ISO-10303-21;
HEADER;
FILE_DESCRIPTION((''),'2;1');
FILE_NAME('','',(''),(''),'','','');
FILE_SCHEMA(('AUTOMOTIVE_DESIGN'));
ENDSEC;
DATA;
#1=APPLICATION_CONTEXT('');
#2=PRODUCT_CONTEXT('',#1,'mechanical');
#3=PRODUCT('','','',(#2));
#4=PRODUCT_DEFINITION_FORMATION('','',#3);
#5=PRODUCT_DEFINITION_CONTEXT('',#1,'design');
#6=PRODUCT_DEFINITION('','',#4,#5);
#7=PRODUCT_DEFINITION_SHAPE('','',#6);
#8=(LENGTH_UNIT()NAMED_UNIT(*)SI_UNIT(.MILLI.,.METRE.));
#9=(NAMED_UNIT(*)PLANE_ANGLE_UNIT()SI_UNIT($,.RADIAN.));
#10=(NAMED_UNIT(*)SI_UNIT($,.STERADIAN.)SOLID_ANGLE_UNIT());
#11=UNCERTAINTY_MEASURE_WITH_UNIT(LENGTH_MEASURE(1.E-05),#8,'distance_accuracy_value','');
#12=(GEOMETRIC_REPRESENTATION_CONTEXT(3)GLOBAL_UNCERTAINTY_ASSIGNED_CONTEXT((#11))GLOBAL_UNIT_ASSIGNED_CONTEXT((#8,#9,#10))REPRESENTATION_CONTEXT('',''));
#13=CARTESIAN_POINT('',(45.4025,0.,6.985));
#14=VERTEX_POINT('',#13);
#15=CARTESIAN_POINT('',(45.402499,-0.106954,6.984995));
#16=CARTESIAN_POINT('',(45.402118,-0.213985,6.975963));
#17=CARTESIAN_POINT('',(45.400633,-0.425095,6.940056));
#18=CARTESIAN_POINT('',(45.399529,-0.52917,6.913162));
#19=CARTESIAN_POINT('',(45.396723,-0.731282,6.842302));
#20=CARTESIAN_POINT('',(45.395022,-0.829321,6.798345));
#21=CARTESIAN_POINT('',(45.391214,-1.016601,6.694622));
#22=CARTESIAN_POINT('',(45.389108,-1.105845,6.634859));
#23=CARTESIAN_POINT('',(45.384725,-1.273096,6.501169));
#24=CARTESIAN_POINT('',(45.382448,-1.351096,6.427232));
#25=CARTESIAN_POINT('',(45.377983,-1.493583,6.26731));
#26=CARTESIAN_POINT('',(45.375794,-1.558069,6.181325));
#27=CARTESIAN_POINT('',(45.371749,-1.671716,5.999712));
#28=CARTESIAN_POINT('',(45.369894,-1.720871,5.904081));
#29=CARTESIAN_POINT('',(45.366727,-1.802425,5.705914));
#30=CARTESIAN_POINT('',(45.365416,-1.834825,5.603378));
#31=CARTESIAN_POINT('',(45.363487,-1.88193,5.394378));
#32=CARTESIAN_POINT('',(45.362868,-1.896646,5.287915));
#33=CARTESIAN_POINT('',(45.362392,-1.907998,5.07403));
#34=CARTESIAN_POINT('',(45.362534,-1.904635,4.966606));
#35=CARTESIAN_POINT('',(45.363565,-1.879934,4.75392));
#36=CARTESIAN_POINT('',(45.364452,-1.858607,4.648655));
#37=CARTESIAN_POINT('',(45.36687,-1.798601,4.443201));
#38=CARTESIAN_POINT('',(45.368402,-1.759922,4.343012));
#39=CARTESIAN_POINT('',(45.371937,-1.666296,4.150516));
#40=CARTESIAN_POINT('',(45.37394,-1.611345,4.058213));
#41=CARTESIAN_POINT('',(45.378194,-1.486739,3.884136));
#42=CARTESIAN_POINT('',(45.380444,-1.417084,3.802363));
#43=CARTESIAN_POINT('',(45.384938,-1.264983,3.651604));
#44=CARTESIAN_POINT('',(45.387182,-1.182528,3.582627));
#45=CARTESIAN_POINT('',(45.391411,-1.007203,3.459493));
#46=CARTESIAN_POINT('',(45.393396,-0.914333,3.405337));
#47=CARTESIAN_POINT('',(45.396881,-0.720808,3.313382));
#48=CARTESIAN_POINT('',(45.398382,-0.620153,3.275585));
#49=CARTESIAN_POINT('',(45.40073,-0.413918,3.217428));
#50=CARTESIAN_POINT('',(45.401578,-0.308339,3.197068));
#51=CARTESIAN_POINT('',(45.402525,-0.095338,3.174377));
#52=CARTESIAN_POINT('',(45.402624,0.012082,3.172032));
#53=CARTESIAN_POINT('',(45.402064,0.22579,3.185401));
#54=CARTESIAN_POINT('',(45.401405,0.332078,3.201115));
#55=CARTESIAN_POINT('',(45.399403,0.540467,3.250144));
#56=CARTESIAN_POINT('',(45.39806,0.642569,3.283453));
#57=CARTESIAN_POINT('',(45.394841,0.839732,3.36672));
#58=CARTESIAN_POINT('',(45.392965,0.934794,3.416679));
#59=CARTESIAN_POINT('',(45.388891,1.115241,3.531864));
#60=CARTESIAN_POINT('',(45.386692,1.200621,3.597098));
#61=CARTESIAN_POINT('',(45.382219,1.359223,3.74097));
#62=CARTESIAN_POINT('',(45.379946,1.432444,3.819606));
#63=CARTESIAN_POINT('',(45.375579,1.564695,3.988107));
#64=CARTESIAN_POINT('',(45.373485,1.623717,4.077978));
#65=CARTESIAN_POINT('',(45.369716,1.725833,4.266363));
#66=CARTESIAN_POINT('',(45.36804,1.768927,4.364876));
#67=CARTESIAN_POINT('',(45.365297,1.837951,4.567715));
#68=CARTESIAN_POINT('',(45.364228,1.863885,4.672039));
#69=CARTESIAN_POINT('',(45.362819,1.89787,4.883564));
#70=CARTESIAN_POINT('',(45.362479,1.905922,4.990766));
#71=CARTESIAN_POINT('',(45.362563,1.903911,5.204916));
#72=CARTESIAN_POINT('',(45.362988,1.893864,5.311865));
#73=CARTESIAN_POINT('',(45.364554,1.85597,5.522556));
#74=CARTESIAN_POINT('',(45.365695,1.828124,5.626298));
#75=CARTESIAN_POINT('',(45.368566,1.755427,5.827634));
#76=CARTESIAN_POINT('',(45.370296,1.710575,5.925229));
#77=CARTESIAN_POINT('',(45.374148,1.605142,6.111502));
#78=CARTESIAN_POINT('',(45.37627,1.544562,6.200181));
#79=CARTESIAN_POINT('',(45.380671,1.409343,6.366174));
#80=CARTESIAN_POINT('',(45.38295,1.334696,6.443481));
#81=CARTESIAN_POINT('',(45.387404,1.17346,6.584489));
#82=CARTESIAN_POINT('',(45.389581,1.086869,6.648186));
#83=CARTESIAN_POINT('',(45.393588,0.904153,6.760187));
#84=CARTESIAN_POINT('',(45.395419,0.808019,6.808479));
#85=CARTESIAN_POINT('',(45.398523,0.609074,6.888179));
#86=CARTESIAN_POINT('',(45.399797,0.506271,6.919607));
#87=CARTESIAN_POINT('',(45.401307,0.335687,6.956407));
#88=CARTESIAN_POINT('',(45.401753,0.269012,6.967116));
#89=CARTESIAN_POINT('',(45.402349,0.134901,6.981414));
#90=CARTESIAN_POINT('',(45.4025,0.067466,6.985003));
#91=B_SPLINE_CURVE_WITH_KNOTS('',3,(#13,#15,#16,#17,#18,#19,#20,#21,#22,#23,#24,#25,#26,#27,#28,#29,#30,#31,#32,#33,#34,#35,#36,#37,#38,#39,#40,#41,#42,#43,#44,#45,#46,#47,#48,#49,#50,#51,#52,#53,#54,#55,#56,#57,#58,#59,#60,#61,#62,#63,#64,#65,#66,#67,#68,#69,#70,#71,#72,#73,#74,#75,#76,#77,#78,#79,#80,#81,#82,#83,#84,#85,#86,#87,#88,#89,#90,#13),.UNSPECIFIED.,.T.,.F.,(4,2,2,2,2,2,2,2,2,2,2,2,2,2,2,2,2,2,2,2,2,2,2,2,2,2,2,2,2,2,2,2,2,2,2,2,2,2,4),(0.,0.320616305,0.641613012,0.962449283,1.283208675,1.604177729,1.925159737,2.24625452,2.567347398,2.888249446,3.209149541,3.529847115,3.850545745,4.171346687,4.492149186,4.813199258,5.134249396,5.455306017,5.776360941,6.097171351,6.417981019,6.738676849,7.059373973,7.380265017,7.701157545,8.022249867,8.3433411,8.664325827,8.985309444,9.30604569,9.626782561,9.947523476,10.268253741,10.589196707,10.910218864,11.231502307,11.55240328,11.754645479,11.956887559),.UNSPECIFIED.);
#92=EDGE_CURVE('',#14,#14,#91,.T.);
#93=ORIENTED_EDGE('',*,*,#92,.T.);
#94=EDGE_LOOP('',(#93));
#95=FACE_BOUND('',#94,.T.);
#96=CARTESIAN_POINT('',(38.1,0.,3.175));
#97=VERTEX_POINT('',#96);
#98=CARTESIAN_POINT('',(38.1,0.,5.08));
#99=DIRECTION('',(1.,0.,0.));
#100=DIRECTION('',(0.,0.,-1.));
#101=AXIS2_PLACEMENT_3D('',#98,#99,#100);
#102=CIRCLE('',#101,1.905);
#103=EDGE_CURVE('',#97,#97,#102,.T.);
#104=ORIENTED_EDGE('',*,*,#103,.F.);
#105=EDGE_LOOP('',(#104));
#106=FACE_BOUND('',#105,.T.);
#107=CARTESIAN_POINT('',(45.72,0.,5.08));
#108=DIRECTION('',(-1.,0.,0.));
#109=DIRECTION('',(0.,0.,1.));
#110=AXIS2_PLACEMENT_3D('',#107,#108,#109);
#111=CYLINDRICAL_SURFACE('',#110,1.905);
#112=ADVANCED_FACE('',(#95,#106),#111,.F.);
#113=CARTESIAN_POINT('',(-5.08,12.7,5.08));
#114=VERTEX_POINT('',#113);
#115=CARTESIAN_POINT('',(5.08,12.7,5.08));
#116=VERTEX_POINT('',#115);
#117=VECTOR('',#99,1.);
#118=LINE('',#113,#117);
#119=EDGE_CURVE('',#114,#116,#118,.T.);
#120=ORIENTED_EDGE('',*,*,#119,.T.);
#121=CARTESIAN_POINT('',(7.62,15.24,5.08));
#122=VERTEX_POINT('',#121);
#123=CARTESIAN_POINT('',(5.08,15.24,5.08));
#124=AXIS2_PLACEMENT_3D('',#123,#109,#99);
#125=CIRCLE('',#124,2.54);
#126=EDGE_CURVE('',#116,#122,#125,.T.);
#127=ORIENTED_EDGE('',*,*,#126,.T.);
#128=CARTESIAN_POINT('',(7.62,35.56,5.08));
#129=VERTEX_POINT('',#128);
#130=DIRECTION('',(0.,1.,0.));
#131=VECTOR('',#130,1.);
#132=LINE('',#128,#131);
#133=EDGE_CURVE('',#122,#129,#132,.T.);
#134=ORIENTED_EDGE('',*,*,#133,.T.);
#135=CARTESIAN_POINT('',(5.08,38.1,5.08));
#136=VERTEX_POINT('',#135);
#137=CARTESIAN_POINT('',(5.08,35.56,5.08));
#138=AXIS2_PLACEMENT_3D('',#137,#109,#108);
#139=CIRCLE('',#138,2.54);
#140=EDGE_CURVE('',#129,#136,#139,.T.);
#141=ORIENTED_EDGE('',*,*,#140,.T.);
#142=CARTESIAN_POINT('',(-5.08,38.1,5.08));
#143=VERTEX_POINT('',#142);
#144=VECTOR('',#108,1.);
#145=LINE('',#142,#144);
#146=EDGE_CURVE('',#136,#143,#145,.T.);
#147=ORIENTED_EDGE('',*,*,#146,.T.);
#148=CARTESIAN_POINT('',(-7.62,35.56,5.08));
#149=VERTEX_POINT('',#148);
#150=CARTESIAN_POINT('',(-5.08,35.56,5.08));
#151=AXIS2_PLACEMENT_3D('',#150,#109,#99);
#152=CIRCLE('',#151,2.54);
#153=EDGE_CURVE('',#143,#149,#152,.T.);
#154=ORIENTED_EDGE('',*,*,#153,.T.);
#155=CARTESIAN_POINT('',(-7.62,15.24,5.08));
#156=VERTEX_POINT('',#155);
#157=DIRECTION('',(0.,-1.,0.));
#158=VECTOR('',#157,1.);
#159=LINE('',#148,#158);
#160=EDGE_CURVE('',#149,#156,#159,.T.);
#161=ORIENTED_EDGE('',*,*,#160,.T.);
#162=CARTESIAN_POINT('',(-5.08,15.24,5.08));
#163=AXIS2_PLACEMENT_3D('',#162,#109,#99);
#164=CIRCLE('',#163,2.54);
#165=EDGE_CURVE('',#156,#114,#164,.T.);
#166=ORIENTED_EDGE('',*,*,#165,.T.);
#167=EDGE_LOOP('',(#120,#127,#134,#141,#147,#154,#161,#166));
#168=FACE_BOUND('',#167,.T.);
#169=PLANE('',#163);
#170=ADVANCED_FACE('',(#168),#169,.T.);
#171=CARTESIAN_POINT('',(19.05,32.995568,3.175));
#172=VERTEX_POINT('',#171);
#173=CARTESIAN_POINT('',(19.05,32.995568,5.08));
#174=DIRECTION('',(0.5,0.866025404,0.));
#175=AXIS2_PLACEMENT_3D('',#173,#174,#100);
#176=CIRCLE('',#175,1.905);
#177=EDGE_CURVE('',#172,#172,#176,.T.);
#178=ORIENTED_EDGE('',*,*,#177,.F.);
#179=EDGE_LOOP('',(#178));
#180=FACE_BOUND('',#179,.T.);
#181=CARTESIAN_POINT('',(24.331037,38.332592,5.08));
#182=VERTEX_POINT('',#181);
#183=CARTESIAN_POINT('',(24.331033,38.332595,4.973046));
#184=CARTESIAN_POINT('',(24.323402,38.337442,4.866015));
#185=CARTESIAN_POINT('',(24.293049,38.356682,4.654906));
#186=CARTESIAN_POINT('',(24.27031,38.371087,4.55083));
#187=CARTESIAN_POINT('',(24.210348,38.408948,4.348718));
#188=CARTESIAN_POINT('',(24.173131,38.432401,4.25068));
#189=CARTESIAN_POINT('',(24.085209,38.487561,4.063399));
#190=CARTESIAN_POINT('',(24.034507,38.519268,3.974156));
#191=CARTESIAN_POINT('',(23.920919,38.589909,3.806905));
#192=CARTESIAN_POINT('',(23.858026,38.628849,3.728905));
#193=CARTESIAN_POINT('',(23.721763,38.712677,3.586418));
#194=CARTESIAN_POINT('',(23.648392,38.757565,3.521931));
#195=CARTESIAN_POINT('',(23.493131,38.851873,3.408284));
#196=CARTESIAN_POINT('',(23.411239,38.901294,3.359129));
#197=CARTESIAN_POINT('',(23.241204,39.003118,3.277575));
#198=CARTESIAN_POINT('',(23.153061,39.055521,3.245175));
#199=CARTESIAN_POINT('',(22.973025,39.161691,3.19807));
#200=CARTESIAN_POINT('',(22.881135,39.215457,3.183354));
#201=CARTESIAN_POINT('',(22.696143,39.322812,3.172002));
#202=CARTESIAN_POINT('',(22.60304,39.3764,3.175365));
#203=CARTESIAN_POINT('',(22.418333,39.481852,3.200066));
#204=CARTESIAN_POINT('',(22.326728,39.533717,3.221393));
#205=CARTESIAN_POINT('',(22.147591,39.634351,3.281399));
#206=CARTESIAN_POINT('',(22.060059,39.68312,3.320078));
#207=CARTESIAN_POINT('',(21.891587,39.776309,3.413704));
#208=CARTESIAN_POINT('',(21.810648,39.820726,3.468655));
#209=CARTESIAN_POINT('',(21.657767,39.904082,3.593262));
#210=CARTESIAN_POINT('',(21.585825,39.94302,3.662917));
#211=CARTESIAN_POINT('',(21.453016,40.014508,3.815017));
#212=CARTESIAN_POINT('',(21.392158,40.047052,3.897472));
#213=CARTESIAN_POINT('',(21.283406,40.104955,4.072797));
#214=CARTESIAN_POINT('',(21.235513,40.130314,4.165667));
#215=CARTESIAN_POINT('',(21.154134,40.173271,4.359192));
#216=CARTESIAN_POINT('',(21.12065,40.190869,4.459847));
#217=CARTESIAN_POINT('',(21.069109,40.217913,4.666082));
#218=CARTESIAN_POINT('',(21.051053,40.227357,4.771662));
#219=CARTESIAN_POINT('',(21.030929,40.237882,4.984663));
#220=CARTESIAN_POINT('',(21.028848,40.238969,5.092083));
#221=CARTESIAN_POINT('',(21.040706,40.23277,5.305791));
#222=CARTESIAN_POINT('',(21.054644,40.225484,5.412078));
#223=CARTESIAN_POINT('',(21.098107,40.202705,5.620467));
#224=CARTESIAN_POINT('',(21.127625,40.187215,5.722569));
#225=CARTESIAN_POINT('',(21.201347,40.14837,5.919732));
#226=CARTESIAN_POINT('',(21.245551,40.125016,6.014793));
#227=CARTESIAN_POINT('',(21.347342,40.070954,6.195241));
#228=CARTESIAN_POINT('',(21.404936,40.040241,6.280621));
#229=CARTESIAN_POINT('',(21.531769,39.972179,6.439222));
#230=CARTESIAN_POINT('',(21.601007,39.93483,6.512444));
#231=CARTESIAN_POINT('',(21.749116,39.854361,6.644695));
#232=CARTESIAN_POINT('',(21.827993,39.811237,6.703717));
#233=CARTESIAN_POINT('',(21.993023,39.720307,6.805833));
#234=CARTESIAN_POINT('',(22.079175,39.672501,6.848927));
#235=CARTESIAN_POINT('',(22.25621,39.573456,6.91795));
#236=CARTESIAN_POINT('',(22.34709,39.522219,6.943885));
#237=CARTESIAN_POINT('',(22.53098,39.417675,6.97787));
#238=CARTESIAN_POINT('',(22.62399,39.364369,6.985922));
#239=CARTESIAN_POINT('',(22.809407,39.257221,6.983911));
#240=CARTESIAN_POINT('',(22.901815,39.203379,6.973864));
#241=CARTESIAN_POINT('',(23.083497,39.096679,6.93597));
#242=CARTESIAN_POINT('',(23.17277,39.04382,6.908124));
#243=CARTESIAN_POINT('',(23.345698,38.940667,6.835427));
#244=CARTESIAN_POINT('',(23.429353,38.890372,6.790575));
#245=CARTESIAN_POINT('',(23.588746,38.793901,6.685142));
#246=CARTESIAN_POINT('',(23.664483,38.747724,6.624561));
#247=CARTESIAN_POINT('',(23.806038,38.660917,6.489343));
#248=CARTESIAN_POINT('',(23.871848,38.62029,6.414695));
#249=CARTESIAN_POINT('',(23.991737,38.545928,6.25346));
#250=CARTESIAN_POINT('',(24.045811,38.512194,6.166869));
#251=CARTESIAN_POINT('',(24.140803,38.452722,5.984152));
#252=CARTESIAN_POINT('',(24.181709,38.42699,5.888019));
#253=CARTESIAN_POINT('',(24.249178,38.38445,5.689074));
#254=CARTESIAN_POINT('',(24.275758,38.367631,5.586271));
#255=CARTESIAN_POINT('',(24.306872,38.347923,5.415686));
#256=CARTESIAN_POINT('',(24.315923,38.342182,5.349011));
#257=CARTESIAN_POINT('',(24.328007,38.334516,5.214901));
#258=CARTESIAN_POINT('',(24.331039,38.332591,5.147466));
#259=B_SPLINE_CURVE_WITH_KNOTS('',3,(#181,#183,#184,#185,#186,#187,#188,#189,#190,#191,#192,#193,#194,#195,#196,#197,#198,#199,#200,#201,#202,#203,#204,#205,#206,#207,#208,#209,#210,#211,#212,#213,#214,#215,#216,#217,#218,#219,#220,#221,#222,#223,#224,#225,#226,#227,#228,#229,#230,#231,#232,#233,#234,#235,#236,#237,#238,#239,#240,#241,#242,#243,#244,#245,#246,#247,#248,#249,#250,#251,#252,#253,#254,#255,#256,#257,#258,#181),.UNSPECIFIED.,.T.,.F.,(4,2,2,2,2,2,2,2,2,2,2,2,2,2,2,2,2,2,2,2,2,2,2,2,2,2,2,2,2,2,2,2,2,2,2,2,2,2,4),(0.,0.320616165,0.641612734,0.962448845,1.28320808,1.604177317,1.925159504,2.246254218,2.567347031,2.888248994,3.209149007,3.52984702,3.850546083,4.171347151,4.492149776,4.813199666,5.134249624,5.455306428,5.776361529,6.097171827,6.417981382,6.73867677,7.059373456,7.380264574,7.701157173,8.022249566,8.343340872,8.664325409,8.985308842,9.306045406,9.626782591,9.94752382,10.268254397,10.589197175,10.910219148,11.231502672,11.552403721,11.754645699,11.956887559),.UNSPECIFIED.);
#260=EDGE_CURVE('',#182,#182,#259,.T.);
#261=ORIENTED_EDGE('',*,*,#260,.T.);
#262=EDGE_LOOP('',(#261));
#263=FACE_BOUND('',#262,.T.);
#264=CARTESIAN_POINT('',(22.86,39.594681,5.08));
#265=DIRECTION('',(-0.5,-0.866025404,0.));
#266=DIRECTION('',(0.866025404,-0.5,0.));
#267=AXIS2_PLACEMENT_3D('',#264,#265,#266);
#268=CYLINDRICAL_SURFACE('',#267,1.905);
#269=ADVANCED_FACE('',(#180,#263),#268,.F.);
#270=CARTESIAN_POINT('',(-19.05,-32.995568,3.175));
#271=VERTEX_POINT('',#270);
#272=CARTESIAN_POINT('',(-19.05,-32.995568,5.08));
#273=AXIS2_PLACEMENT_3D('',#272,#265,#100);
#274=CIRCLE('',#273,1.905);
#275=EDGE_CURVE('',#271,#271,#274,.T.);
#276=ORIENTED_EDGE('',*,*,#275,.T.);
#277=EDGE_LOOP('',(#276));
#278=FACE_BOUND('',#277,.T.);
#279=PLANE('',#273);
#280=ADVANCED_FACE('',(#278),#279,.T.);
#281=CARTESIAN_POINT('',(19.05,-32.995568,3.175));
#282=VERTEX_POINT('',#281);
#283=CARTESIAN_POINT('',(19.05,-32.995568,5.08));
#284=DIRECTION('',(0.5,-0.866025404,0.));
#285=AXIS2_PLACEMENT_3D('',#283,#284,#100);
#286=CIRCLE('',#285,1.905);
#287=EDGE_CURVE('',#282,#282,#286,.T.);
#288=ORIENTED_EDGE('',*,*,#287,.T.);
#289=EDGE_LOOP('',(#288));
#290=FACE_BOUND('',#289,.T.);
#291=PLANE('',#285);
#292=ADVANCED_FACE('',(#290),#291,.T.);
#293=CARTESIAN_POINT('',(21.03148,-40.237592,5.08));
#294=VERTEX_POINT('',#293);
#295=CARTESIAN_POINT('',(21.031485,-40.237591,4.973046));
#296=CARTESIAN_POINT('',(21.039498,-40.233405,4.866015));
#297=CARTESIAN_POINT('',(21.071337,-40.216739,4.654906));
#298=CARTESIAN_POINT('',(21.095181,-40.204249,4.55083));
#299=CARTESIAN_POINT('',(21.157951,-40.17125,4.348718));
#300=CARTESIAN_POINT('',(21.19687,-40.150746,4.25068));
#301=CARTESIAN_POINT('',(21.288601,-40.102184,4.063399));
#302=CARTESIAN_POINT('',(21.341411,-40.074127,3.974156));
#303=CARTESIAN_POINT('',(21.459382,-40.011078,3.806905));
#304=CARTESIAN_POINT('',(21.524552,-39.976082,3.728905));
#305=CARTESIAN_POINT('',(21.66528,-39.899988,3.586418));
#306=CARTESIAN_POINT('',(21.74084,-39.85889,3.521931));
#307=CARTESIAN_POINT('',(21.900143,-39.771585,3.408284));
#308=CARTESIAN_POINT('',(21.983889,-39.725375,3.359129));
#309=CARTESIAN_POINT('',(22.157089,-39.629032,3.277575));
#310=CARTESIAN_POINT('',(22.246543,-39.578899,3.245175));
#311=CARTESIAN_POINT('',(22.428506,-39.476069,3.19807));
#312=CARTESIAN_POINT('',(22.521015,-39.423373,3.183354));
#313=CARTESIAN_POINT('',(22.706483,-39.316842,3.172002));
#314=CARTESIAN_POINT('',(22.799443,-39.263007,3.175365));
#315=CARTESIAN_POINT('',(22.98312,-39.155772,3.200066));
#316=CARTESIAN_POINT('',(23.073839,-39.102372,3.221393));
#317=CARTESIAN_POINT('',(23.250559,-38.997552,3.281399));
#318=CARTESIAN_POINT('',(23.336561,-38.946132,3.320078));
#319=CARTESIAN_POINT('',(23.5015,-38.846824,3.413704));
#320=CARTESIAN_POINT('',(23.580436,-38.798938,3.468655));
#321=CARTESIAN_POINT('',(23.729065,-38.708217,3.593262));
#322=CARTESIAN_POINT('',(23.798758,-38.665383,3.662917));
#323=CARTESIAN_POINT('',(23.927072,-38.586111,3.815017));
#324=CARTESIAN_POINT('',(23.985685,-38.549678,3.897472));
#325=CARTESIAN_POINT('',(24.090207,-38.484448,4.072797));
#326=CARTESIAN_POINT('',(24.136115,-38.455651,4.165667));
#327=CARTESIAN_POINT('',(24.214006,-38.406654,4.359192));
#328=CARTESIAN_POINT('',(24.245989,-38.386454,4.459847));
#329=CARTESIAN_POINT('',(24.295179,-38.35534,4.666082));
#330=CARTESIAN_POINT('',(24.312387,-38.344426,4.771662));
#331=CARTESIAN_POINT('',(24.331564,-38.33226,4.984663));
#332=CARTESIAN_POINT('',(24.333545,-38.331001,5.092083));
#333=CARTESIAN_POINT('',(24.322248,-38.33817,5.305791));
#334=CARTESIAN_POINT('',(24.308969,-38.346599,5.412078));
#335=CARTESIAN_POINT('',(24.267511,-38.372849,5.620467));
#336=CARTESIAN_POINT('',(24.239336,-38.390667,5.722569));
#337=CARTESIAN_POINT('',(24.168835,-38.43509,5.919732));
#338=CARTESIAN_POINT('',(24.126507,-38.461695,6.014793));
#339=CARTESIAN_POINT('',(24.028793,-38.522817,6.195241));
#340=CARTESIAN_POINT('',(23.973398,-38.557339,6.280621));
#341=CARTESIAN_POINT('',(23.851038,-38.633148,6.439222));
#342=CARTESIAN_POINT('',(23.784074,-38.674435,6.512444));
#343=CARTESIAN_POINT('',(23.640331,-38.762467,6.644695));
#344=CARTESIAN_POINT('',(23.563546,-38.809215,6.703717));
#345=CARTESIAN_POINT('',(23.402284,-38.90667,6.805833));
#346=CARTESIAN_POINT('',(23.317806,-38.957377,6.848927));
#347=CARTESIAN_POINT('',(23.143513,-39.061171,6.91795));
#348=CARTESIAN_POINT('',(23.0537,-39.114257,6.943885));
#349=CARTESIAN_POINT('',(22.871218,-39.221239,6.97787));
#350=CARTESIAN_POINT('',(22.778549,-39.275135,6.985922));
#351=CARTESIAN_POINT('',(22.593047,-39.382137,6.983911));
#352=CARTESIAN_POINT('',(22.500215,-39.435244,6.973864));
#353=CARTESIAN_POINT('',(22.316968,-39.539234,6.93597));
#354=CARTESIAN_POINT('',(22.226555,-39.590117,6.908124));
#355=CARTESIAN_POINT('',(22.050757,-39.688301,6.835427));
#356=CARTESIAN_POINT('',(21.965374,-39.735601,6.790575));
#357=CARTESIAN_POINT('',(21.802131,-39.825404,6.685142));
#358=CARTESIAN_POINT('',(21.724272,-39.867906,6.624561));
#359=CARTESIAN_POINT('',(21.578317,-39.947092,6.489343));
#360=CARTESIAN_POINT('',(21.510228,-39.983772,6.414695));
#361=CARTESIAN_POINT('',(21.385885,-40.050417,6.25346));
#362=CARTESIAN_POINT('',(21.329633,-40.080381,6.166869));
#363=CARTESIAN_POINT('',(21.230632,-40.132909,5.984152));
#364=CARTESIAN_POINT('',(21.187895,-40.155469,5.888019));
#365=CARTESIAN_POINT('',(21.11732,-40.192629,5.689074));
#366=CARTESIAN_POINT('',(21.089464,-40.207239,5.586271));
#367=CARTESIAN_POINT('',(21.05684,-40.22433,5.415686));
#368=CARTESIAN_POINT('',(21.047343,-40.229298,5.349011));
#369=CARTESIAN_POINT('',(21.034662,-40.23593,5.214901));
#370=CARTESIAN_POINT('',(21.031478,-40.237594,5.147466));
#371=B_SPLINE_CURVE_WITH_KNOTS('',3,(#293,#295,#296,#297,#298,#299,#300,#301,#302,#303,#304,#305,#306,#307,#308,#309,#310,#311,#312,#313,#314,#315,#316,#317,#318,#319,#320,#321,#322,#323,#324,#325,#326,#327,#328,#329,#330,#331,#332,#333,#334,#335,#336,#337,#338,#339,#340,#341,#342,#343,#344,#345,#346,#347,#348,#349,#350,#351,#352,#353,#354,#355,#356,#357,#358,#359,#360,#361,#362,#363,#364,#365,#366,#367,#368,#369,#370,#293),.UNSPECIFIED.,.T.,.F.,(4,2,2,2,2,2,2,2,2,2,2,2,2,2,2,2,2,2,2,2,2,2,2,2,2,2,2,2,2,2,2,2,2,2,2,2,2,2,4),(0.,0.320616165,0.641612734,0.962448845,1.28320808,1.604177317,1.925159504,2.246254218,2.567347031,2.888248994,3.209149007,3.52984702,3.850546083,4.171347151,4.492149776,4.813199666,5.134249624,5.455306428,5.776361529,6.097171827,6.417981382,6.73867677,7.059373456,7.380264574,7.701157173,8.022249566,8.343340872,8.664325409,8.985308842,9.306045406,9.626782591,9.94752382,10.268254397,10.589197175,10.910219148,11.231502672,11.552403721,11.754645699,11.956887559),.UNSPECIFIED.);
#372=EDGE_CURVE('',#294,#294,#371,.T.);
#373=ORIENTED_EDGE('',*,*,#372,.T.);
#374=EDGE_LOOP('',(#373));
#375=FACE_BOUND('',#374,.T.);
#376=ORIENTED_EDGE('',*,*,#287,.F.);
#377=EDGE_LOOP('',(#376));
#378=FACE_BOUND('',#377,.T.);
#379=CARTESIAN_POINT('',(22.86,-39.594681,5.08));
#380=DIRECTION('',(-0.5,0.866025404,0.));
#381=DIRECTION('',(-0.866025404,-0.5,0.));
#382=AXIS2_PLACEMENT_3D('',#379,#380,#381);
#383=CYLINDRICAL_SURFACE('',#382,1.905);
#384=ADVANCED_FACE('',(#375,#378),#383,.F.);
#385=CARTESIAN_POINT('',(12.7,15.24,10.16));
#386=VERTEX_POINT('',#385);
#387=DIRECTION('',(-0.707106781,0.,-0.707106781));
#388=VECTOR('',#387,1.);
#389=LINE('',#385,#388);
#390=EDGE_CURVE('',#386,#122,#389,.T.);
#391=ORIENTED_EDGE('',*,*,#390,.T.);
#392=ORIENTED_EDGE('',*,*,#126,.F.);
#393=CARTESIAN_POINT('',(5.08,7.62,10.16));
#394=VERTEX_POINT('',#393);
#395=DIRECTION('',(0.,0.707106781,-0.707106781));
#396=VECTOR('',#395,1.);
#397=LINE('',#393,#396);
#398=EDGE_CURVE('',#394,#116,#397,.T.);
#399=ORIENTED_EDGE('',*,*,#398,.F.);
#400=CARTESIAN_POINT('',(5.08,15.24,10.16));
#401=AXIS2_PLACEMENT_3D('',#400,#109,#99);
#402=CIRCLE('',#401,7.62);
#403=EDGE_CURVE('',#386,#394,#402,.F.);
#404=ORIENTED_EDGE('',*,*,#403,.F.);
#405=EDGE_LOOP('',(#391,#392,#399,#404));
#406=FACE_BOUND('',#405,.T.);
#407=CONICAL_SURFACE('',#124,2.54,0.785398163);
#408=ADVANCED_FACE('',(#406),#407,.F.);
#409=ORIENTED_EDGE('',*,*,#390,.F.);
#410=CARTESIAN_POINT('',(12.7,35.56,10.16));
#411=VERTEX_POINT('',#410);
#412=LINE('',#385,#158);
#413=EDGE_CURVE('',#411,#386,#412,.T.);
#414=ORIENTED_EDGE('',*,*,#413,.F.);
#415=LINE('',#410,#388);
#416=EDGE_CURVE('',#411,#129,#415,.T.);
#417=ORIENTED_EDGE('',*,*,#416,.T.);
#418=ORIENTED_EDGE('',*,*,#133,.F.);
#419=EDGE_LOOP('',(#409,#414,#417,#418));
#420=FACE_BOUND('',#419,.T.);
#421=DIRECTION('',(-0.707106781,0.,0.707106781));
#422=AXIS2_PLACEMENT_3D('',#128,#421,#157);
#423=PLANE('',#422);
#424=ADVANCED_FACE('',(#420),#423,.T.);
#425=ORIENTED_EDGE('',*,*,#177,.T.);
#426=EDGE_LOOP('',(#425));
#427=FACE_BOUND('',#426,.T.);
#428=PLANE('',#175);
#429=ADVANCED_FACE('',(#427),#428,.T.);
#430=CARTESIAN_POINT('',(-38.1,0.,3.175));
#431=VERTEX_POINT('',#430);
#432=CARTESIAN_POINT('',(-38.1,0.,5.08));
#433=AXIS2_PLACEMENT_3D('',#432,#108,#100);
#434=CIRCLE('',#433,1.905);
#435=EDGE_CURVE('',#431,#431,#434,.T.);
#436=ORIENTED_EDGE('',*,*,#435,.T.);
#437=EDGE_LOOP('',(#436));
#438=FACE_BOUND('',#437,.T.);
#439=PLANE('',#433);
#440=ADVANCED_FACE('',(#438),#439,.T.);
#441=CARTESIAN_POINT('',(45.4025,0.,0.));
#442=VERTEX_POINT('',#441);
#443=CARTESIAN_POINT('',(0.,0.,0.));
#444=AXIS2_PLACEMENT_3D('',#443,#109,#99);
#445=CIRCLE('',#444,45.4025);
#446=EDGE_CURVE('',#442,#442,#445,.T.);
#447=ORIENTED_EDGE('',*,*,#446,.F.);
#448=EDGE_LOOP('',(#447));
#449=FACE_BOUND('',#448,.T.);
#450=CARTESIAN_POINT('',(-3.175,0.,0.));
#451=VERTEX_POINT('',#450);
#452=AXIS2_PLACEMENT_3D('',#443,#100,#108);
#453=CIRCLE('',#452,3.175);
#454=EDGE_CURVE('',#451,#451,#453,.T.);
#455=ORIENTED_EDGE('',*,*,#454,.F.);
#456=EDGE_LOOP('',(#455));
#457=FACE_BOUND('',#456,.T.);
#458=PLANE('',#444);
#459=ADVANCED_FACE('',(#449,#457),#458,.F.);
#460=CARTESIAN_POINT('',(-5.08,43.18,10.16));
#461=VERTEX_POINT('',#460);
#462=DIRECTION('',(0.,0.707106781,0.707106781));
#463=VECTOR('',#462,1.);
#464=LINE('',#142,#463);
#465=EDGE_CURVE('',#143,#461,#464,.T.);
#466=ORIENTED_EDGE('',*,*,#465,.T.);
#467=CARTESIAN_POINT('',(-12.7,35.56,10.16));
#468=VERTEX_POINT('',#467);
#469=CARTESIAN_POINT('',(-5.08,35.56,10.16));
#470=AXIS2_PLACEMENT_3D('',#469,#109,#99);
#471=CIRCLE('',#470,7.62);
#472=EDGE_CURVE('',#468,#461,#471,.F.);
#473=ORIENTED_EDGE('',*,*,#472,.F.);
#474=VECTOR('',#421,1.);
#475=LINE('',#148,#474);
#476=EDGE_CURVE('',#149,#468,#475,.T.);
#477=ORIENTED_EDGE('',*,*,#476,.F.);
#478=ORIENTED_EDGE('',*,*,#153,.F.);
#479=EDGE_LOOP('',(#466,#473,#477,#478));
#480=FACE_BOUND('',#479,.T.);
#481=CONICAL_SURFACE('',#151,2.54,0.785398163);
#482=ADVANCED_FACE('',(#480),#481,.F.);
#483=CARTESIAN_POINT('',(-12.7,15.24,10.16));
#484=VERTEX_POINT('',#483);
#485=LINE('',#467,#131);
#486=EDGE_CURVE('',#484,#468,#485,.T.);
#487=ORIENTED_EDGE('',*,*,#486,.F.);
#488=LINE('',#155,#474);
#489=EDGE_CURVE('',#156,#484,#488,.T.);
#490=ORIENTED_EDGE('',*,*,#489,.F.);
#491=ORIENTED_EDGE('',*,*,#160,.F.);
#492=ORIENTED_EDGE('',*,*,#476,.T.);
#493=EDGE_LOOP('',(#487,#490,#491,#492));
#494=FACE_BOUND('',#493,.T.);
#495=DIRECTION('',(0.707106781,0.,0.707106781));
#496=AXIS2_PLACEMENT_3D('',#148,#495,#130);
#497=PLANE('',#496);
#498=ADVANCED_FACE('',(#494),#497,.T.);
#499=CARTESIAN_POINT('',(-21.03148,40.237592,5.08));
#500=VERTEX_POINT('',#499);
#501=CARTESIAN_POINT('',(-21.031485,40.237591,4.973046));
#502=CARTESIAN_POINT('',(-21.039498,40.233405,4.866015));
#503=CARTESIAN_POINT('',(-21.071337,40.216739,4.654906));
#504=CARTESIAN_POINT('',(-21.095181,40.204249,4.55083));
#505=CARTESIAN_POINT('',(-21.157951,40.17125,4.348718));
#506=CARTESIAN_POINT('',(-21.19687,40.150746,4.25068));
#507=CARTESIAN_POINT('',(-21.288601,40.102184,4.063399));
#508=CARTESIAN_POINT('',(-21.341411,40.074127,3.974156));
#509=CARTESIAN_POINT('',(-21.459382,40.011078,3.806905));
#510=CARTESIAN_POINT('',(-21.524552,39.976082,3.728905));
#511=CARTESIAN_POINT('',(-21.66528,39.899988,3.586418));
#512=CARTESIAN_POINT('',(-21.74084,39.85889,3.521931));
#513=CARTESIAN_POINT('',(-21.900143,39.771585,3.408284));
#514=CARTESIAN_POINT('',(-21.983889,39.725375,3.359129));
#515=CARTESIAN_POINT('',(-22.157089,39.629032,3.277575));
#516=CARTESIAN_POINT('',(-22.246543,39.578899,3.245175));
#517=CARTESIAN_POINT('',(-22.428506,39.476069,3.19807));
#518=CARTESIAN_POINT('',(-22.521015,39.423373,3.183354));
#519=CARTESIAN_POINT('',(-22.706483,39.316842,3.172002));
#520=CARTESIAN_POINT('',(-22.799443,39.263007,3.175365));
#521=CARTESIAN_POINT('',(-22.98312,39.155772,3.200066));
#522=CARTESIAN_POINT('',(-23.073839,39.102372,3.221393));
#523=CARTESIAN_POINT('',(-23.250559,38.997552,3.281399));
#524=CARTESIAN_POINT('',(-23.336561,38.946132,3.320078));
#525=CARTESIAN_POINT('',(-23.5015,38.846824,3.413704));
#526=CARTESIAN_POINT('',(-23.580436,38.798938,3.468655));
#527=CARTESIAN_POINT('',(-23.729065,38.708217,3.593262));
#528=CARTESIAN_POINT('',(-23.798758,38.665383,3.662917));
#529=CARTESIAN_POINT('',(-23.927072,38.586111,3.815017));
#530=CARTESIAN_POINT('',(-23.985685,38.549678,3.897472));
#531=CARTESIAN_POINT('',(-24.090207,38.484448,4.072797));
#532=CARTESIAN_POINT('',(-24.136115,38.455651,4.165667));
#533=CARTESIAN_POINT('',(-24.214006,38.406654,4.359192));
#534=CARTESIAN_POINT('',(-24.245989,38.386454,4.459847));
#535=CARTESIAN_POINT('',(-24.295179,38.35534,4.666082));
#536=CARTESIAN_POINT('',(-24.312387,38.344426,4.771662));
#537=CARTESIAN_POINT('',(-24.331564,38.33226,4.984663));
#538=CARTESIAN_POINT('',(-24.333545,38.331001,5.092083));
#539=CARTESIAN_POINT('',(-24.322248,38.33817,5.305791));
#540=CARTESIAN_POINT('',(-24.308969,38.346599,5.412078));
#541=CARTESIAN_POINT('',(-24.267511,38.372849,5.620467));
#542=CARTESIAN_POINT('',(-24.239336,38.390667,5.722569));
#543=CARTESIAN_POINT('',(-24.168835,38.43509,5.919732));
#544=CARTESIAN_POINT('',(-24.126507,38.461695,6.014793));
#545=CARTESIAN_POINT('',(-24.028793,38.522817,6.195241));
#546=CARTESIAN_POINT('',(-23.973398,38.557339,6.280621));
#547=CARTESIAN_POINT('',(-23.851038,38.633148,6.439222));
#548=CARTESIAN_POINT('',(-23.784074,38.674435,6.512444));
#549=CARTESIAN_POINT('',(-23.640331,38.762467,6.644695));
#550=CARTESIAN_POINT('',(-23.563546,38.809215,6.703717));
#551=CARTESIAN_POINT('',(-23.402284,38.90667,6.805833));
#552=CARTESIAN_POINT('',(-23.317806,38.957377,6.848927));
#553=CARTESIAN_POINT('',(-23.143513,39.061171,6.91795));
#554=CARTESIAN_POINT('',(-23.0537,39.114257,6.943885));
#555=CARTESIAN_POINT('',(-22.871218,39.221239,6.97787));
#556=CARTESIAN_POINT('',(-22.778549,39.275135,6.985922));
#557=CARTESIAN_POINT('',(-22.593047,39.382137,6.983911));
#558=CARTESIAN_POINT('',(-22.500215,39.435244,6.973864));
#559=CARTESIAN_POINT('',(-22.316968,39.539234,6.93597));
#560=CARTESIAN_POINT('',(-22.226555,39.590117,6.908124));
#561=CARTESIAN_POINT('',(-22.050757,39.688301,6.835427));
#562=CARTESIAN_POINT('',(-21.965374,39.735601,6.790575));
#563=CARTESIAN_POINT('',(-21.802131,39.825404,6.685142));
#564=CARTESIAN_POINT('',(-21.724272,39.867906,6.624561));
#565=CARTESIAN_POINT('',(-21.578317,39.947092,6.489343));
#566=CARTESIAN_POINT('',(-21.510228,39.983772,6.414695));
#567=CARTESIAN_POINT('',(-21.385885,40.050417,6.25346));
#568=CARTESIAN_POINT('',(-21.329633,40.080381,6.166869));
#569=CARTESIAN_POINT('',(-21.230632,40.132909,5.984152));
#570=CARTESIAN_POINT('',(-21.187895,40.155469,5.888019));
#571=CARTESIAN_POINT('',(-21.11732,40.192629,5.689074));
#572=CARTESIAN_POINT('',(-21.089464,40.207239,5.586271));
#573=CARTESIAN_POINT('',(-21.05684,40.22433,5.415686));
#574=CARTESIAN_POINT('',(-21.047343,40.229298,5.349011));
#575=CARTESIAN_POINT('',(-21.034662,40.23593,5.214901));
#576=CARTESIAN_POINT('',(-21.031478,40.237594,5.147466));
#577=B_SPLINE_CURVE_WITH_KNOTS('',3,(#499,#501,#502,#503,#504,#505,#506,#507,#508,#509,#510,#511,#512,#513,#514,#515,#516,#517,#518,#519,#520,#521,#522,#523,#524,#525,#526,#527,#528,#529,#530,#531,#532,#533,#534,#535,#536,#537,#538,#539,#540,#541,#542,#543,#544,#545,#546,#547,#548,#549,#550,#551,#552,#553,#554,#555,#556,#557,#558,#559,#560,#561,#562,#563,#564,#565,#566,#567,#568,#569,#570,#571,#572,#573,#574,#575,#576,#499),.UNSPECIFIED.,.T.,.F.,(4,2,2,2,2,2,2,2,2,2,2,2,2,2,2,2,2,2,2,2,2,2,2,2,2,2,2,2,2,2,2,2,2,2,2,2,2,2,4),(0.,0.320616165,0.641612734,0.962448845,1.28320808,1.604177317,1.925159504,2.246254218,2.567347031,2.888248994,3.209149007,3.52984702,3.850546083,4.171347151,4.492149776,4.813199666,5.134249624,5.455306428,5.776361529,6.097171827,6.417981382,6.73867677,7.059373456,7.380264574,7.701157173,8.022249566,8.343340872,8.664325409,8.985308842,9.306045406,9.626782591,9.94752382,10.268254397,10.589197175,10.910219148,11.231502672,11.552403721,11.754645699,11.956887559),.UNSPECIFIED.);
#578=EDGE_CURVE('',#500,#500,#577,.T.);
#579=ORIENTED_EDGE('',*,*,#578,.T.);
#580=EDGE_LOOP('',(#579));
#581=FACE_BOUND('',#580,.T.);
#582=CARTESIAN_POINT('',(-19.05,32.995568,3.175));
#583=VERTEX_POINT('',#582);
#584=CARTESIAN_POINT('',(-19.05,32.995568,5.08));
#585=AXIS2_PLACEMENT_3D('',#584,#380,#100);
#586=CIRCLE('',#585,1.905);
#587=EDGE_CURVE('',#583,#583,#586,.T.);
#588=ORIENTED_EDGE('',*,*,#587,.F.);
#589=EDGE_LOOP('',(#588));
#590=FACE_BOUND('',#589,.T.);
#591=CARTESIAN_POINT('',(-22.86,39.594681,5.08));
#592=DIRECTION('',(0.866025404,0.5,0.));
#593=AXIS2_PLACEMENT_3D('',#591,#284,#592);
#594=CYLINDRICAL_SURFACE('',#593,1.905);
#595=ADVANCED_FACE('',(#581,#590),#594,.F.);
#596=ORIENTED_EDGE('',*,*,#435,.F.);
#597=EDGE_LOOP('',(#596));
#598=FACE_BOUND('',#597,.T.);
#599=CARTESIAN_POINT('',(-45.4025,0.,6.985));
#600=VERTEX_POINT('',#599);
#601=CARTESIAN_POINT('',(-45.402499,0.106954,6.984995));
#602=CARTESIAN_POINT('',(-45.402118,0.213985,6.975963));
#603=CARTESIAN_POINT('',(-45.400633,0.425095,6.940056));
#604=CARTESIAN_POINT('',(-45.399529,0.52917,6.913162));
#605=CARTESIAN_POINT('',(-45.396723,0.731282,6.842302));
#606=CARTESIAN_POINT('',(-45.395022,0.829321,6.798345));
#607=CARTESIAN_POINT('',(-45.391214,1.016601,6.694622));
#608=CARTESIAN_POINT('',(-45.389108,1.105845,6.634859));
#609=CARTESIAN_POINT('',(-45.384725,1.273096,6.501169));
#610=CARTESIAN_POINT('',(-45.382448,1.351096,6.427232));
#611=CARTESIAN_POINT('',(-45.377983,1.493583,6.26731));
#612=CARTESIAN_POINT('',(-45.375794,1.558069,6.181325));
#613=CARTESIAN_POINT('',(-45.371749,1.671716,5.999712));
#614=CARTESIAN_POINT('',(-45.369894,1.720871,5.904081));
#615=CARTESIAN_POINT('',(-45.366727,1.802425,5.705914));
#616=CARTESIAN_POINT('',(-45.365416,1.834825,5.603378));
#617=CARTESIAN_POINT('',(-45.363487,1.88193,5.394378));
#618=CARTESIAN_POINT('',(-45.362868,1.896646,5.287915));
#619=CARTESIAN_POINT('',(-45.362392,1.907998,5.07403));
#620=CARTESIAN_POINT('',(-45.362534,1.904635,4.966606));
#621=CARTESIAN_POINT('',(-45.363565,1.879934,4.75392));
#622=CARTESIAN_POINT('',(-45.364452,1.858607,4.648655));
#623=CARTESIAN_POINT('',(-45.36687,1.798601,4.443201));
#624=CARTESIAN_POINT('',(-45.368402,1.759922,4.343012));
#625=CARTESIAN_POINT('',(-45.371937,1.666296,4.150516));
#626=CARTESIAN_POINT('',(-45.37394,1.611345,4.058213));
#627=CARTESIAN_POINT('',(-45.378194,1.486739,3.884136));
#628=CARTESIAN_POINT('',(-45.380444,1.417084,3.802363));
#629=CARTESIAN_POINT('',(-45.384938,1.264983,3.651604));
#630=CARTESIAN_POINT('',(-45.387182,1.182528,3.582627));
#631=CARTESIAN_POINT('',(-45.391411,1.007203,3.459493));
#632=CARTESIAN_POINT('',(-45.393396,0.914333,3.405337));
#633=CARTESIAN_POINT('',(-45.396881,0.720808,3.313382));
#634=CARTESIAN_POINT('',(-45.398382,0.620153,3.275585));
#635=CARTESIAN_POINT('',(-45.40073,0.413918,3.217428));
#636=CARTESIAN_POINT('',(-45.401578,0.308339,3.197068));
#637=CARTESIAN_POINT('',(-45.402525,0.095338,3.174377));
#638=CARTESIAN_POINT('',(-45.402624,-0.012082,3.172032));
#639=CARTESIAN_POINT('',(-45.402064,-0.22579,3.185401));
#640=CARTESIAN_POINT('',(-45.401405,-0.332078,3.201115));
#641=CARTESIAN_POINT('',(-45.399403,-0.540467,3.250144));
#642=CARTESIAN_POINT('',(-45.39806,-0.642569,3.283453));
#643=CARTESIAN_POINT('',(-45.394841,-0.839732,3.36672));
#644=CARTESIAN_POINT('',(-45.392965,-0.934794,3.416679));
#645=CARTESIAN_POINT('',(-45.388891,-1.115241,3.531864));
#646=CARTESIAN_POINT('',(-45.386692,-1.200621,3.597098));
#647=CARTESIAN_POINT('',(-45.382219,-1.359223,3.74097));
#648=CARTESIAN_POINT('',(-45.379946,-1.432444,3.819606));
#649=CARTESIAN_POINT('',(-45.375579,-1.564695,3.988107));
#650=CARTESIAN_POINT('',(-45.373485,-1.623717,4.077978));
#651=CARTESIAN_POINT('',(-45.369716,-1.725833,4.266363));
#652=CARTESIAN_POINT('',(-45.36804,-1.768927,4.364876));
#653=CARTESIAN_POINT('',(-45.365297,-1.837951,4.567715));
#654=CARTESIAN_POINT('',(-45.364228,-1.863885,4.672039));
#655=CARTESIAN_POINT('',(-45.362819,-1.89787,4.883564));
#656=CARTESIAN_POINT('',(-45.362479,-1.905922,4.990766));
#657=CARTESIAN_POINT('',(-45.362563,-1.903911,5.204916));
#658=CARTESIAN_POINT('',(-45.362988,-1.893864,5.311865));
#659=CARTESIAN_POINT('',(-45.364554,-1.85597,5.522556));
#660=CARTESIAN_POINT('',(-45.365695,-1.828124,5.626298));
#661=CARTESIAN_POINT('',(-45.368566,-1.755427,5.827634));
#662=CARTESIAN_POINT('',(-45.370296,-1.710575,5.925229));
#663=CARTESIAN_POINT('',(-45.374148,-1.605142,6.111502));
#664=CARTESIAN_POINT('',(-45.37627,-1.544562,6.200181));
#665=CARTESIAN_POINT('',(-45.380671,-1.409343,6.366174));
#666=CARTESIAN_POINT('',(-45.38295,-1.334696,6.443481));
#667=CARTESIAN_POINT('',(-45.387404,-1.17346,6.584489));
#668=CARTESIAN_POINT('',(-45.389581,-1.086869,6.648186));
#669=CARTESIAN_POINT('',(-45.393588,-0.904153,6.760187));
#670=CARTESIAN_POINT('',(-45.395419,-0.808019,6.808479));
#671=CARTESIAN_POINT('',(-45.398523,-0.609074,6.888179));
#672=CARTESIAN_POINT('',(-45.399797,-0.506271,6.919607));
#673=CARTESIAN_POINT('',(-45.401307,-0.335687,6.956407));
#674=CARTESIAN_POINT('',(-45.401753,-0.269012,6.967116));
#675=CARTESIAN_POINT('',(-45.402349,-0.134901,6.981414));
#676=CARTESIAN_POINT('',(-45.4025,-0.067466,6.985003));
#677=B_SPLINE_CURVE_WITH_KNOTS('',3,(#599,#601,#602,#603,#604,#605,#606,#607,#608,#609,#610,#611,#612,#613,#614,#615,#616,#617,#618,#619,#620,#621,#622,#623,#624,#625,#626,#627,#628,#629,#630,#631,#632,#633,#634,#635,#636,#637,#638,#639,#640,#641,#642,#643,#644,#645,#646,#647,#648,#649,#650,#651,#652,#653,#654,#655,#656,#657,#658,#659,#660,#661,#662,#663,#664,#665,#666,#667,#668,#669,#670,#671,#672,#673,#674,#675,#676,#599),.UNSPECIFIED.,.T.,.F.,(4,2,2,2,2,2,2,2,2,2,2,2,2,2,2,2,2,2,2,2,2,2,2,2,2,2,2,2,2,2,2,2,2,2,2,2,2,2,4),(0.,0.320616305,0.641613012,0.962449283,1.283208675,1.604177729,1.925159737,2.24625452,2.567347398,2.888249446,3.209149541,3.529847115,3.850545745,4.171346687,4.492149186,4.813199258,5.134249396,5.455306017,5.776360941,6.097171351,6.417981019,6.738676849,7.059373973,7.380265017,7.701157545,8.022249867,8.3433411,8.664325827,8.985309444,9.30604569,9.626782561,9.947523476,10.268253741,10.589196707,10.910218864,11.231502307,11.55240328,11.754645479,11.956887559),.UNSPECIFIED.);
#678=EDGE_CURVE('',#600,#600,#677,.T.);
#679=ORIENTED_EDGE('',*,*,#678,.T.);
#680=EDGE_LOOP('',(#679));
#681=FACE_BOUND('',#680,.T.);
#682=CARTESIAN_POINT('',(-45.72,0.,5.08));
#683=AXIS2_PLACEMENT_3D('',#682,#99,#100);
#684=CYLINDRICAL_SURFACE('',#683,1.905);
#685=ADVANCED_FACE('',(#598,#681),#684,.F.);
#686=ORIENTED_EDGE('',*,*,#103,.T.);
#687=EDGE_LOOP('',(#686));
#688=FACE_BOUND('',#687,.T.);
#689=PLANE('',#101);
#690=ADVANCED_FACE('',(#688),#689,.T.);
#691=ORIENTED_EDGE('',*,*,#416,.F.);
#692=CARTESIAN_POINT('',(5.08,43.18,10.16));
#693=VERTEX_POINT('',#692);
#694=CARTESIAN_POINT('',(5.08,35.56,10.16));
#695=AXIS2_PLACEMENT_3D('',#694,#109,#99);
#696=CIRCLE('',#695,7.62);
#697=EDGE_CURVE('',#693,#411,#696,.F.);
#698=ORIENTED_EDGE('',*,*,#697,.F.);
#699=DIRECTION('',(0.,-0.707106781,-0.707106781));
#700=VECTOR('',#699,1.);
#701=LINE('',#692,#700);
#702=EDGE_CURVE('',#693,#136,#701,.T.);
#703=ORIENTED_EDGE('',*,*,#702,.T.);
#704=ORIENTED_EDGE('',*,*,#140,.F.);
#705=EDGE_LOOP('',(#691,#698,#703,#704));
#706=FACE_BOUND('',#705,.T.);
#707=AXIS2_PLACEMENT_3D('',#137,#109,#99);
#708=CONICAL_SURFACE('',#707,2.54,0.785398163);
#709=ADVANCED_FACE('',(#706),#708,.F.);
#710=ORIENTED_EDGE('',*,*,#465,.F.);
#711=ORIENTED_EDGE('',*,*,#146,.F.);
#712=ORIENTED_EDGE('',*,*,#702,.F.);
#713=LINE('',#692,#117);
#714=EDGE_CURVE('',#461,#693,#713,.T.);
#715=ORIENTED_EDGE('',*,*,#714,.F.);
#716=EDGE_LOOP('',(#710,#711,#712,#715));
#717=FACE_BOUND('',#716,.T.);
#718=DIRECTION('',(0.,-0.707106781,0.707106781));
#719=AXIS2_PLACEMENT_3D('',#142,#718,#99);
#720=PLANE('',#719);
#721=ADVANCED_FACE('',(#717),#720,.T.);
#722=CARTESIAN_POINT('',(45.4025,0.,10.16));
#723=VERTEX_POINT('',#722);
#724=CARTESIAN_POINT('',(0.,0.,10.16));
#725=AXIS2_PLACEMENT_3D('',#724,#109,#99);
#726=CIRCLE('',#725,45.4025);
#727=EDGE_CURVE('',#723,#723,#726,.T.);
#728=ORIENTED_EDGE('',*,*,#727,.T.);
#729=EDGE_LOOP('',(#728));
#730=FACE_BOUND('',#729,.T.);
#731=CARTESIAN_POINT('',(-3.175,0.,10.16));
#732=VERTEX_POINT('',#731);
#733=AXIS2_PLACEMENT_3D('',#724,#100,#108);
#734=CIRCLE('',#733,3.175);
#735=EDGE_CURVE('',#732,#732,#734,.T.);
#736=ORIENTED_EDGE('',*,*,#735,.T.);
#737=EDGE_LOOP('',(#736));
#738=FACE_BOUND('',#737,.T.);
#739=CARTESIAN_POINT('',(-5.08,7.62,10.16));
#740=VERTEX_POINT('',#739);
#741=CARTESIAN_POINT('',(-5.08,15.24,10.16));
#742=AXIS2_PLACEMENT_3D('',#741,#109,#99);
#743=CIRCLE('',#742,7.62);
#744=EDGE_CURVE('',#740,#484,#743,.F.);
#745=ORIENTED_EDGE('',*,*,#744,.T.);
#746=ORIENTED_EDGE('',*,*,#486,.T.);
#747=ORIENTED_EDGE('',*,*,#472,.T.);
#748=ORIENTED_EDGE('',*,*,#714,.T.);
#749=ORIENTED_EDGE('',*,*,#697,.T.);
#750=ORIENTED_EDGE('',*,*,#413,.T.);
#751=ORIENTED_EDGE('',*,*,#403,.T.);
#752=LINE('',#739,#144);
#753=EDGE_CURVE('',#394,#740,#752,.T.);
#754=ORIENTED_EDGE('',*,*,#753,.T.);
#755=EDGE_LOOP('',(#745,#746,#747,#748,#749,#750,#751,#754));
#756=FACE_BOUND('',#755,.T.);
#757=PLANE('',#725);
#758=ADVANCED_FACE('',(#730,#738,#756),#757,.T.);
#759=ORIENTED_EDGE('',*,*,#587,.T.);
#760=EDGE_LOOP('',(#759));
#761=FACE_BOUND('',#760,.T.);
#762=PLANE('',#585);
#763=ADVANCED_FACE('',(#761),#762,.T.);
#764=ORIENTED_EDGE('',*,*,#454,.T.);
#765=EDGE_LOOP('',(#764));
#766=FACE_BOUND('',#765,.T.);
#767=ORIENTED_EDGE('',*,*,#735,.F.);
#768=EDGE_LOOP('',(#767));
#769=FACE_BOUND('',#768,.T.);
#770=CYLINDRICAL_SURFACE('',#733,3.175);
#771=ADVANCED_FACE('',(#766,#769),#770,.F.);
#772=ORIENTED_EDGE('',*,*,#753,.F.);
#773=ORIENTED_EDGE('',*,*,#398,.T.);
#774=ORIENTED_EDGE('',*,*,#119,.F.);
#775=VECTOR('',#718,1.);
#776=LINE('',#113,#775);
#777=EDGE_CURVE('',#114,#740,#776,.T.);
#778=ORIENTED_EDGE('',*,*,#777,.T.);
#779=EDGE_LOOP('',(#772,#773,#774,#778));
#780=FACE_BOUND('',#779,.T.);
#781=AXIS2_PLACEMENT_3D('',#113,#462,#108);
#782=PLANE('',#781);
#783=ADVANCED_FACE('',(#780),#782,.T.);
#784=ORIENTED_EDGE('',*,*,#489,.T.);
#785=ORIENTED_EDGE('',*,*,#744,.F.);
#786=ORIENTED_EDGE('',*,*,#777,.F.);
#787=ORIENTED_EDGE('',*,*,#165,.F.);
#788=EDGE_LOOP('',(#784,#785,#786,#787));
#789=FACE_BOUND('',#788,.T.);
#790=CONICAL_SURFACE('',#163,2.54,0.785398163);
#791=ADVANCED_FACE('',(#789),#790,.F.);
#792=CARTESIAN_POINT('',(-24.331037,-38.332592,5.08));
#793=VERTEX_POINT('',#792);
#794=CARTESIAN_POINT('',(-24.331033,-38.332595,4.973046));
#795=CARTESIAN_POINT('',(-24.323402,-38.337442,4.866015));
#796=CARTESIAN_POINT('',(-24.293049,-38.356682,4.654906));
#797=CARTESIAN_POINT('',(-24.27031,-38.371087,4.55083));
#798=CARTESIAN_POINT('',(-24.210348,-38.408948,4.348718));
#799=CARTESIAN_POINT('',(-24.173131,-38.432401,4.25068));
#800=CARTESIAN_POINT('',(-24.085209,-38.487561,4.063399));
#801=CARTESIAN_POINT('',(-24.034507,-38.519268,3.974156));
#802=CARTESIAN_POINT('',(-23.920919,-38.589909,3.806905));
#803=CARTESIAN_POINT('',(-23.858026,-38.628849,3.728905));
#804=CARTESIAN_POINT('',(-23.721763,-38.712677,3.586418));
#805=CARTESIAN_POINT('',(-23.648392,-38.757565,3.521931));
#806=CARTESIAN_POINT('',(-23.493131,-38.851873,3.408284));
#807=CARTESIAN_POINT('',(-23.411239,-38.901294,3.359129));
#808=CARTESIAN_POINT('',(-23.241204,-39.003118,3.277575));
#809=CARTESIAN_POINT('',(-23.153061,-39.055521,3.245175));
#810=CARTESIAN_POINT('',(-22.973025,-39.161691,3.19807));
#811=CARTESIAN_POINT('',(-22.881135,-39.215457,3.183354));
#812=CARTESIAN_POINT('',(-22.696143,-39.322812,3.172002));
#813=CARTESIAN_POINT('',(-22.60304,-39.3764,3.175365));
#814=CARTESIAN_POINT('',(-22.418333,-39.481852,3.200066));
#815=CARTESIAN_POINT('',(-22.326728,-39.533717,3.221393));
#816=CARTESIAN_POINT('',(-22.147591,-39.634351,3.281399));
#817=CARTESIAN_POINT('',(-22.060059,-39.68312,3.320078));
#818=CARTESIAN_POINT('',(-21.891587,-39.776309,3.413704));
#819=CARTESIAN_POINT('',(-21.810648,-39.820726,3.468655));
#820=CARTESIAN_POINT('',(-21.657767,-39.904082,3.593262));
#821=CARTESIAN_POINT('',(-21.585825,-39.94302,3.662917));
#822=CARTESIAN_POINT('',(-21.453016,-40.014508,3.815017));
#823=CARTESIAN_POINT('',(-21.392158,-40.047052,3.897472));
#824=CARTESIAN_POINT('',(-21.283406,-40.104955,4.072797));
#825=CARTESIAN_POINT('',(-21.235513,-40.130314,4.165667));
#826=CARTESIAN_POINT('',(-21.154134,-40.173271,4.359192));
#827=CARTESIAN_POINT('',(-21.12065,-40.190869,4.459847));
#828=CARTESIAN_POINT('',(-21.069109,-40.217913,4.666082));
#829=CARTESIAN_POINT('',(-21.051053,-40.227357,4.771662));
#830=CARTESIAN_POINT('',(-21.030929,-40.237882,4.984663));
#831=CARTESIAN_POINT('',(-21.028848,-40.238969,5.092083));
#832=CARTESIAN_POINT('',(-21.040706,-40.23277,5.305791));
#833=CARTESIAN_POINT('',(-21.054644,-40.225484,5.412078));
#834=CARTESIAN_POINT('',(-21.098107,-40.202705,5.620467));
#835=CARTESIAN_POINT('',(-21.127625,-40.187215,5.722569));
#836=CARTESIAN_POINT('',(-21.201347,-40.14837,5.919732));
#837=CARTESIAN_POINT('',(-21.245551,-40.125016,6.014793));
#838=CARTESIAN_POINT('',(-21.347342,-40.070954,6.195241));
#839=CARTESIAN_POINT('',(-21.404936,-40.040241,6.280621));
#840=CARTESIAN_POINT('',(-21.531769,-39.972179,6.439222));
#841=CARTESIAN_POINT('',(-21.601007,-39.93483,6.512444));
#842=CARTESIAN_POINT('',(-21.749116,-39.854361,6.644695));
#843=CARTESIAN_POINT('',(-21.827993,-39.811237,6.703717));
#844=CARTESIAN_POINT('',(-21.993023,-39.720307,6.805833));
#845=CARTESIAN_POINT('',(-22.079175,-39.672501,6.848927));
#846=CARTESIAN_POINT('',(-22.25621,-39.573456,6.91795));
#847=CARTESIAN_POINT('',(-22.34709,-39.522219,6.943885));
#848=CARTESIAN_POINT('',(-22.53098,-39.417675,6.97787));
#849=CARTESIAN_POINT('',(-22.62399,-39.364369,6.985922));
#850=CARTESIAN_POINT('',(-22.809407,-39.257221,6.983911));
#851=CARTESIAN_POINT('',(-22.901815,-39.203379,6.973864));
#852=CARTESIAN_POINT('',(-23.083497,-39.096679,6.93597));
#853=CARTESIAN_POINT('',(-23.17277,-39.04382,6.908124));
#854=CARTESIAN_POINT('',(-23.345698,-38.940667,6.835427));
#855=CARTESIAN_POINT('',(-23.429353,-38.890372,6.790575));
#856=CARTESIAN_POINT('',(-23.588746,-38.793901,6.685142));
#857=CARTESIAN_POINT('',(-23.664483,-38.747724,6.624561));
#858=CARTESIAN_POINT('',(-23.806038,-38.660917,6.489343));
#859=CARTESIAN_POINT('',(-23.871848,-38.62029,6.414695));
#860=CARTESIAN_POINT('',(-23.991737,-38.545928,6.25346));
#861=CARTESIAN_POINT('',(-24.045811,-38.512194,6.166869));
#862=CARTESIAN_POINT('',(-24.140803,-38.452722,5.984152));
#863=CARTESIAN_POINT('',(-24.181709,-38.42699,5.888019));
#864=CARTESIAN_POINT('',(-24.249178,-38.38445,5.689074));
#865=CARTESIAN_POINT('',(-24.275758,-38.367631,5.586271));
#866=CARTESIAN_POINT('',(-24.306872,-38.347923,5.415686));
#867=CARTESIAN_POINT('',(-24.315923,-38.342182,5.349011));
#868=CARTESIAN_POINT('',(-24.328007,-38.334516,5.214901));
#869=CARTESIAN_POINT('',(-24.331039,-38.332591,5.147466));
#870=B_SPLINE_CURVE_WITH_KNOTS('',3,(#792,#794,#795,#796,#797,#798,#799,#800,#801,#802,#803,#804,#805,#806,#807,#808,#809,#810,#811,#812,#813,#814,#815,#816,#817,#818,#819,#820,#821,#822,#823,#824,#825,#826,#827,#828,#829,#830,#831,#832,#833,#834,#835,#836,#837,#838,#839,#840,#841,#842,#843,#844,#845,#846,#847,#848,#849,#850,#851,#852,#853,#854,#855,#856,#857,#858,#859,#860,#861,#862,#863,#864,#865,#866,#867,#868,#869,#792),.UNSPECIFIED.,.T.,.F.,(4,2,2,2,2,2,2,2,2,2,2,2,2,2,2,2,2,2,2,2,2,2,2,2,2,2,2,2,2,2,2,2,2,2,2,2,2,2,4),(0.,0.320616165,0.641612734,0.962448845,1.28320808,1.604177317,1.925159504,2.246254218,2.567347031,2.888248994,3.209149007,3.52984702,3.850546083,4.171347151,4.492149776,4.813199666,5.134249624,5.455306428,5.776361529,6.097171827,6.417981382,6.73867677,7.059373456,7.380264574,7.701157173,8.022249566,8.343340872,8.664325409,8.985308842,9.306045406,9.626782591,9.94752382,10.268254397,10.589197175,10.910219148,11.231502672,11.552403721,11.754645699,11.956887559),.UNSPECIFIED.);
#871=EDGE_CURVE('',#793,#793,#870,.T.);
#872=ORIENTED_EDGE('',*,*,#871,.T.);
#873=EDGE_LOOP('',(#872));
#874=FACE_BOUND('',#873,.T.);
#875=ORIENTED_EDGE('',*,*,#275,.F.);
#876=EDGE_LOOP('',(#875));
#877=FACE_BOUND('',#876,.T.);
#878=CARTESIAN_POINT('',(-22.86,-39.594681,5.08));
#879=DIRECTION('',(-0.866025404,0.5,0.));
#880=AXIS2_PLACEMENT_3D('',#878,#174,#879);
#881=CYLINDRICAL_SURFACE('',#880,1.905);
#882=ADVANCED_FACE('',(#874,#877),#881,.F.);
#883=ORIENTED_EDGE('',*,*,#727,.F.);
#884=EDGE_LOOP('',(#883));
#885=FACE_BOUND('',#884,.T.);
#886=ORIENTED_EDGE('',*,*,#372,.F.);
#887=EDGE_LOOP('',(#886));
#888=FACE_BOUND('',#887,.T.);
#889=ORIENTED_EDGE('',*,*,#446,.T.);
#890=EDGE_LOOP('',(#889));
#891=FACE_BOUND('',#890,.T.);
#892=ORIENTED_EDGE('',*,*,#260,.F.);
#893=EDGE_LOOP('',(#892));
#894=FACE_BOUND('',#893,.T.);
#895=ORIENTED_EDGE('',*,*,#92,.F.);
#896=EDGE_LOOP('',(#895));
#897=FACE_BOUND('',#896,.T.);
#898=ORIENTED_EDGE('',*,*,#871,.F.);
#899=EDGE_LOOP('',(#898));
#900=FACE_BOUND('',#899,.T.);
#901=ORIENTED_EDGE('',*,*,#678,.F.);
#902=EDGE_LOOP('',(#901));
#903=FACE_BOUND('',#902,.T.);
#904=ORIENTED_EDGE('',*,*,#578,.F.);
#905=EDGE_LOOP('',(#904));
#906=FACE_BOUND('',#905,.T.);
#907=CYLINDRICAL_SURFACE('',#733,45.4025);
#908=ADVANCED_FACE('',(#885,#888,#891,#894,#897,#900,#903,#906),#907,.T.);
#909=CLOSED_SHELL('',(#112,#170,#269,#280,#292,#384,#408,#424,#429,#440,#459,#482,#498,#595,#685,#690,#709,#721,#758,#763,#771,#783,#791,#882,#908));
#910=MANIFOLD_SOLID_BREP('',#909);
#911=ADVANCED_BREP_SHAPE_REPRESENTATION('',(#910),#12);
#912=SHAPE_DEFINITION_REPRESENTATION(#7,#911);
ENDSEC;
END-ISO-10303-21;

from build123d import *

# Parameters (mm, degrees)
SKETCH1_R           = 45.4025
BOSS_EXTRUDE1_DEPTH = 10.16
CUT_EXTRUDE1_START  = 38.1
SKETCH2_R           = 1.905
CUT_EXTRUDE1_DEPTH  = 7.62
CIRPATTERN1_COUNT   = 6
SKETCH3_R           = 3.175
CUT_EXTRUDE2_DEPTH  = 66.007689034
CUT_EXTRUDE3_DEPTH  = 5.08
CHAMFER2_SIZE       = 5.08


with BuildPart() as part:
    # Sketch1 → Boss-Extrude1 (new body)
    with BuildSketch(Plane.XY):
        Circle(SKETCH1_R)
    extrude(amount=BOSS_EXTRUDE1_DEPTH)

    # Sketch2 → Cut-Extrude1 (cut)
    with BuildSketch(Plane(origin=(0, 0, 0), x_dir=(0, 0, -1), z_dir=(1, 0, 0)).offset(CUT_EXTRUDE1_START)):
        with Locations((-5.08, 0)):
            Circle(SKETCH2_R)
    cut_extrude1 = extrude(amount=CUT_EXTRUDE1_DEPTH, mode=Mode.SUBTRACT)

    # CirPattern1: Cut-Extrude1 ×6 about axis
    cirpattern1_axis = Axis((0, 0, 0), (0, 0, 1))
    for i in range(1, CIRPATTERN1_COUNT):
        add(cut_extrude1.rotate(cirpattern1_axis, i * 360 / CIRPATTERN1_COUNT), mode=Mode.SUBTRACT)

    # Sketch3 → Cut-Extrude2 (cut, through all)
    with BuildSketch(Plane(origin=(0, 0, 0), x_dir=(-1, 0, 0), z_dir=(0, 0, -1))):
        Circle(SKETCH3_R)
    extrude(amount=-CUT_EXTRUDE2_DEPTH, mode=Mode.SUBTRACT)

    # Sketch4 → Cut-Extrude3 (cut)
    with BuildSketch(Plane.XY.offset(10.16)):
        with BuildLine():
            Line((-5.08, 38.1), (5.08, 38.1))
            ThreePointArc((5.08, 38.1), (6.876051224, 37.356051224), (7.62, 35.56))
            Line((7.62, 35.56), (7.62, 15.24))
            ThreePointArc((7.62, 15.24), (6.876051224, 13.443948776), (5.08, 12.7))
            Line((5.08, 12.7), (-5.08, 12.7))
            ThreePointArc((-5.08, 12.7), (-6.876051224, 13.443948776), (-7.62, 15.24))
            Line((-7.62, 15.24), (-7.62, 35.56))
            ThreePointArc((-7.62, 35.56), (-6.876051224, 37.356051224), (-5.08, 38.1))
        make_face()
    extrude(amount=-CUT_EXTRUDE3_DEPTH, mode=Mode.SUBTRACT)

    # Chamfer2
    chamfer2_edges = [part.edges().sort_by_distance(p)[0] for p in [
        (0, 12.7, 10.16),
        (6.876051224, 13.443948776, 10.16),
        (-6.876051224, 13.443948776, 10.16),
        (7.62, 25.4, 10.16),
        (-7.62, 25.4, 10.16),
        (6.876051224, 37.356051224, 10.16),
        (-6.876051224, 37.356051224, 10.16),
        (0, 38.1, 10.16),
    ]]
    chamfer(chamfer2_edges, length=CHAMFER2_SIZE - 0.0001)  # a hair under: the kernel refuses the full size


solid = part.part
